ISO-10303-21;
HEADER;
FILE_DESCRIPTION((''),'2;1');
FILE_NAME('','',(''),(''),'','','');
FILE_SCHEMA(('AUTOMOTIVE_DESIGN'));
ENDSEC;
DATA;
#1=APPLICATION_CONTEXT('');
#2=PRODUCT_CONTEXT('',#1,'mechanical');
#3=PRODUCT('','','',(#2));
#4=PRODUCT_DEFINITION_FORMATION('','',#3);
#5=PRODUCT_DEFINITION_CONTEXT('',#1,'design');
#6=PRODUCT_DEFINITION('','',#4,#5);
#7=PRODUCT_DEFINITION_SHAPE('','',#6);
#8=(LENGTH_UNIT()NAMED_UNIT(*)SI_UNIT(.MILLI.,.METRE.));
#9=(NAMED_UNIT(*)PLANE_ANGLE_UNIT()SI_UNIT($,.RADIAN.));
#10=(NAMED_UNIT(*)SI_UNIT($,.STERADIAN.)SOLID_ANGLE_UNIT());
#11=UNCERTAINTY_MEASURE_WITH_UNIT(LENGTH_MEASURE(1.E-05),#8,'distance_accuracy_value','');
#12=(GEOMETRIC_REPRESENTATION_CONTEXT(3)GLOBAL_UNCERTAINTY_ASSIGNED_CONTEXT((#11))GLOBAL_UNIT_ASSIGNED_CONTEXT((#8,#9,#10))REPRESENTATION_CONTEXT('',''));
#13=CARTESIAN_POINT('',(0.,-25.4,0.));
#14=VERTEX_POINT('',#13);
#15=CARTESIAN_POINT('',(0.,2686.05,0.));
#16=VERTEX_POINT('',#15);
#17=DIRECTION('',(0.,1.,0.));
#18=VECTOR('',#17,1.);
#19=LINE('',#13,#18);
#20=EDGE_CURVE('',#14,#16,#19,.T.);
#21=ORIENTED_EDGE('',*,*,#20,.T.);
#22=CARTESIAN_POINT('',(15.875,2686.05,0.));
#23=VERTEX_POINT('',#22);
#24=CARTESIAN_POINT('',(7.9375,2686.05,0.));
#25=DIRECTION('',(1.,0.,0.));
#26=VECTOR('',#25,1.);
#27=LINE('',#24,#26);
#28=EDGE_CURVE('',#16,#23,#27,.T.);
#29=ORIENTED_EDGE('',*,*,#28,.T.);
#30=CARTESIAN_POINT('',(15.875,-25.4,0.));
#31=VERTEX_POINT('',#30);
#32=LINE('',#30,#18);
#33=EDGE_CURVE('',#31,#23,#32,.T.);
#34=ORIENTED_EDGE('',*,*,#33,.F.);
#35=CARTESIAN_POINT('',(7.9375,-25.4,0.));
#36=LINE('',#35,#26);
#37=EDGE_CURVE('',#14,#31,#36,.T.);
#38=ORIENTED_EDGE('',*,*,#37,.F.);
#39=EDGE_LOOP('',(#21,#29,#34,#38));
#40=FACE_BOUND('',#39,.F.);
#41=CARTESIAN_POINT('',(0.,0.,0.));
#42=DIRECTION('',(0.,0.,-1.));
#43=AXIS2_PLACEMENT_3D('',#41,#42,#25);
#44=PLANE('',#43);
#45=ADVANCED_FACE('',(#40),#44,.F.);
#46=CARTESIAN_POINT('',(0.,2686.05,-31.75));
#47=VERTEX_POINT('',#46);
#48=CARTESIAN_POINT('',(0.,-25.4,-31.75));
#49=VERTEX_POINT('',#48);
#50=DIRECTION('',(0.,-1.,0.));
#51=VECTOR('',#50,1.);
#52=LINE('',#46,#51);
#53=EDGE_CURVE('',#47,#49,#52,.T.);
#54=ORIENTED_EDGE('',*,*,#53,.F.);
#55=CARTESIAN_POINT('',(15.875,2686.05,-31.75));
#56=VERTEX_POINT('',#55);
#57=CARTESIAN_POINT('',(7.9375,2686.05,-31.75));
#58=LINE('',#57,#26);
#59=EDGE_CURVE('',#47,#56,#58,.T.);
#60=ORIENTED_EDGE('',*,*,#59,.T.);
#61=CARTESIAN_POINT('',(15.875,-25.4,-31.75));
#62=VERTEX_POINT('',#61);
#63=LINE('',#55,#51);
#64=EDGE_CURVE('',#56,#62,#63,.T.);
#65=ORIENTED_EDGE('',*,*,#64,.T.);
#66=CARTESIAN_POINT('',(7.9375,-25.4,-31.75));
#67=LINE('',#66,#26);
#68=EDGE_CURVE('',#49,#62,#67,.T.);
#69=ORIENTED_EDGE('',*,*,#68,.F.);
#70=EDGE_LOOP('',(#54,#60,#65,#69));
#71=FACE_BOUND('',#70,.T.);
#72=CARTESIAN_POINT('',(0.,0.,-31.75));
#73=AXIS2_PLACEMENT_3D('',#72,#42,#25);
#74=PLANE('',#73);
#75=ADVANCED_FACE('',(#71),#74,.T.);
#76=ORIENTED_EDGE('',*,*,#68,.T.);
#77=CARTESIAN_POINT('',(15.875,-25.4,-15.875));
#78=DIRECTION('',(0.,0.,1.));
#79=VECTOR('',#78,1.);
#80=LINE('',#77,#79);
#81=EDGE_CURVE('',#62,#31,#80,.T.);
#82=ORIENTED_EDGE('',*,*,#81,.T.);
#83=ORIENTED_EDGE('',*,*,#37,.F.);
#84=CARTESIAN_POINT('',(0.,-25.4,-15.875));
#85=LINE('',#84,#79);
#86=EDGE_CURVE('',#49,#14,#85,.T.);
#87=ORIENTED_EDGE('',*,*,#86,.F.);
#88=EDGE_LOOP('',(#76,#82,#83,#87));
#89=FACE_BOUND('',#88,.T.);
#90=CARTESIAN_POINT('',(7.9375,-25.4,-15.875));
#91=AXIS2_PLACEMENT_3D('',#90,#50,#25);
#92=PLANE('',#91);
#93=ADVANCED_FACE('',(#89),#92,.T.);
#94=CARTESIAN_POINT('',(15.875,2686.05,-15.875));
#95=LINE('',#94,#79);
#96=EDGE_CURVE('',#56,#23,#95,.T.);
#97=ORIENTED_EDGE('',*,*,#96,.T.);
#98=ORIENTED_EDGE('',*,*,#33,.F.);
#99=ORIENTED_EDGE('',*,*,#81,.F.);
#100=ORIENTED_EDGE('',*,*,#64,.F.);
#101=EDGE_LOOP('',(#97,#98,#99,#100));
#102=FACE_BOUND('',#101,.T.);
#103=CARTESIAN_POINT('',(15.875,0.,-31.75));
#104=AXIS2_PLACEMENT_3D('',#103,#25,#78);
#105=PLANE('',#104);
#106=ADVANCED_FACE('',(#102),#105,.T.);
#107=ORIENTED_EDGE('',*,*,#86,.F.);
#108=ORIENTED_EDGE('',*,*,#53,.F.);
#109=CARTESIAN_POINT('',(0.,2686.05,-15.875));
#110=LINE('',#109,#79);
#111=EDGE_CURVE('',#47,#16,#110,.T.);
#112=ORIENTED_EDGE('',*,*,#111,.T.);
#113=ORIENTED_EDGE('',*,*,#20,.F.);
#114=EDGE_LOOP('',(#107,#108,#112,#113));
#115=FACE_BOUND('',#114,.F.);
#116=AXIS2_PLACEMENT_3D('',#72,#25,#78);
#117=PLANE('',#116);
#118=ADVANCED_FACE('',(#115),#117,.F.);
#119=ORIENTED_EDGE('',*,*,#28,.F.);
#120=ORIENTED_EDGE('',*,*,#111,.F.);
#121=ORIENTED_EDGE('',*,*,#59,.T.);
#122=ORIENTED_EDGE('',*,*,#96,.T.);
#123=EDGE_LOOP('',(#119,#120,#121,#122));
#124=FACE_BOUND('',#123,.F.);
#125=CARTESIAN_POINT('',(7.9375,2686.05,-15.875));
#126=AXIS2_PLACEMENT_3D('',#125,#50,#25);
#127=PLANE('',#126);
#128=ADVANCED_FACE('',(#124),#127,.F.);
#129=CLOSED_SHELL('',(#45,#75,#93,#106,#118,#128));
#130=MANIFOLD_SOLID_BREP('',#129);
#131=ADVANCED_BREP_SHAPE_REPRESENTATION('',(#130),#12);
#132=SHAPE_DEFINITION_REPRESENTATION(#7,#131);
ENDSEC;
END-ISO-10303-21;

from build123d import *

# Parameters (mm, degrees)
F0_W     = 15.875
F0_H     = 31.75
F1_DEPTH = 25.4
F2_DEPTH = 2686.05


# Not quite as in the source:
# - a feature names something its author has since deleted; it is built from what else it names


with BuildPart() as f1:
    # F0 (on Front) → F1 (new body)
    with BuildSketch(Plane.XZ):
        with Locations((7.9375, -15.875)):
            Rectangle(F0_W, F0_H)
    extrude(amount=F1_DEPTH)

    # F2 (add): a face of the model
    f2_faces = [f1.faces().sort_by_distance(p)[0] for p in [
        (7.9375, 0, -15.875),
    ]]
    extrude(f2_faces, amount=F2_DEPTH)


solid = f1.part
